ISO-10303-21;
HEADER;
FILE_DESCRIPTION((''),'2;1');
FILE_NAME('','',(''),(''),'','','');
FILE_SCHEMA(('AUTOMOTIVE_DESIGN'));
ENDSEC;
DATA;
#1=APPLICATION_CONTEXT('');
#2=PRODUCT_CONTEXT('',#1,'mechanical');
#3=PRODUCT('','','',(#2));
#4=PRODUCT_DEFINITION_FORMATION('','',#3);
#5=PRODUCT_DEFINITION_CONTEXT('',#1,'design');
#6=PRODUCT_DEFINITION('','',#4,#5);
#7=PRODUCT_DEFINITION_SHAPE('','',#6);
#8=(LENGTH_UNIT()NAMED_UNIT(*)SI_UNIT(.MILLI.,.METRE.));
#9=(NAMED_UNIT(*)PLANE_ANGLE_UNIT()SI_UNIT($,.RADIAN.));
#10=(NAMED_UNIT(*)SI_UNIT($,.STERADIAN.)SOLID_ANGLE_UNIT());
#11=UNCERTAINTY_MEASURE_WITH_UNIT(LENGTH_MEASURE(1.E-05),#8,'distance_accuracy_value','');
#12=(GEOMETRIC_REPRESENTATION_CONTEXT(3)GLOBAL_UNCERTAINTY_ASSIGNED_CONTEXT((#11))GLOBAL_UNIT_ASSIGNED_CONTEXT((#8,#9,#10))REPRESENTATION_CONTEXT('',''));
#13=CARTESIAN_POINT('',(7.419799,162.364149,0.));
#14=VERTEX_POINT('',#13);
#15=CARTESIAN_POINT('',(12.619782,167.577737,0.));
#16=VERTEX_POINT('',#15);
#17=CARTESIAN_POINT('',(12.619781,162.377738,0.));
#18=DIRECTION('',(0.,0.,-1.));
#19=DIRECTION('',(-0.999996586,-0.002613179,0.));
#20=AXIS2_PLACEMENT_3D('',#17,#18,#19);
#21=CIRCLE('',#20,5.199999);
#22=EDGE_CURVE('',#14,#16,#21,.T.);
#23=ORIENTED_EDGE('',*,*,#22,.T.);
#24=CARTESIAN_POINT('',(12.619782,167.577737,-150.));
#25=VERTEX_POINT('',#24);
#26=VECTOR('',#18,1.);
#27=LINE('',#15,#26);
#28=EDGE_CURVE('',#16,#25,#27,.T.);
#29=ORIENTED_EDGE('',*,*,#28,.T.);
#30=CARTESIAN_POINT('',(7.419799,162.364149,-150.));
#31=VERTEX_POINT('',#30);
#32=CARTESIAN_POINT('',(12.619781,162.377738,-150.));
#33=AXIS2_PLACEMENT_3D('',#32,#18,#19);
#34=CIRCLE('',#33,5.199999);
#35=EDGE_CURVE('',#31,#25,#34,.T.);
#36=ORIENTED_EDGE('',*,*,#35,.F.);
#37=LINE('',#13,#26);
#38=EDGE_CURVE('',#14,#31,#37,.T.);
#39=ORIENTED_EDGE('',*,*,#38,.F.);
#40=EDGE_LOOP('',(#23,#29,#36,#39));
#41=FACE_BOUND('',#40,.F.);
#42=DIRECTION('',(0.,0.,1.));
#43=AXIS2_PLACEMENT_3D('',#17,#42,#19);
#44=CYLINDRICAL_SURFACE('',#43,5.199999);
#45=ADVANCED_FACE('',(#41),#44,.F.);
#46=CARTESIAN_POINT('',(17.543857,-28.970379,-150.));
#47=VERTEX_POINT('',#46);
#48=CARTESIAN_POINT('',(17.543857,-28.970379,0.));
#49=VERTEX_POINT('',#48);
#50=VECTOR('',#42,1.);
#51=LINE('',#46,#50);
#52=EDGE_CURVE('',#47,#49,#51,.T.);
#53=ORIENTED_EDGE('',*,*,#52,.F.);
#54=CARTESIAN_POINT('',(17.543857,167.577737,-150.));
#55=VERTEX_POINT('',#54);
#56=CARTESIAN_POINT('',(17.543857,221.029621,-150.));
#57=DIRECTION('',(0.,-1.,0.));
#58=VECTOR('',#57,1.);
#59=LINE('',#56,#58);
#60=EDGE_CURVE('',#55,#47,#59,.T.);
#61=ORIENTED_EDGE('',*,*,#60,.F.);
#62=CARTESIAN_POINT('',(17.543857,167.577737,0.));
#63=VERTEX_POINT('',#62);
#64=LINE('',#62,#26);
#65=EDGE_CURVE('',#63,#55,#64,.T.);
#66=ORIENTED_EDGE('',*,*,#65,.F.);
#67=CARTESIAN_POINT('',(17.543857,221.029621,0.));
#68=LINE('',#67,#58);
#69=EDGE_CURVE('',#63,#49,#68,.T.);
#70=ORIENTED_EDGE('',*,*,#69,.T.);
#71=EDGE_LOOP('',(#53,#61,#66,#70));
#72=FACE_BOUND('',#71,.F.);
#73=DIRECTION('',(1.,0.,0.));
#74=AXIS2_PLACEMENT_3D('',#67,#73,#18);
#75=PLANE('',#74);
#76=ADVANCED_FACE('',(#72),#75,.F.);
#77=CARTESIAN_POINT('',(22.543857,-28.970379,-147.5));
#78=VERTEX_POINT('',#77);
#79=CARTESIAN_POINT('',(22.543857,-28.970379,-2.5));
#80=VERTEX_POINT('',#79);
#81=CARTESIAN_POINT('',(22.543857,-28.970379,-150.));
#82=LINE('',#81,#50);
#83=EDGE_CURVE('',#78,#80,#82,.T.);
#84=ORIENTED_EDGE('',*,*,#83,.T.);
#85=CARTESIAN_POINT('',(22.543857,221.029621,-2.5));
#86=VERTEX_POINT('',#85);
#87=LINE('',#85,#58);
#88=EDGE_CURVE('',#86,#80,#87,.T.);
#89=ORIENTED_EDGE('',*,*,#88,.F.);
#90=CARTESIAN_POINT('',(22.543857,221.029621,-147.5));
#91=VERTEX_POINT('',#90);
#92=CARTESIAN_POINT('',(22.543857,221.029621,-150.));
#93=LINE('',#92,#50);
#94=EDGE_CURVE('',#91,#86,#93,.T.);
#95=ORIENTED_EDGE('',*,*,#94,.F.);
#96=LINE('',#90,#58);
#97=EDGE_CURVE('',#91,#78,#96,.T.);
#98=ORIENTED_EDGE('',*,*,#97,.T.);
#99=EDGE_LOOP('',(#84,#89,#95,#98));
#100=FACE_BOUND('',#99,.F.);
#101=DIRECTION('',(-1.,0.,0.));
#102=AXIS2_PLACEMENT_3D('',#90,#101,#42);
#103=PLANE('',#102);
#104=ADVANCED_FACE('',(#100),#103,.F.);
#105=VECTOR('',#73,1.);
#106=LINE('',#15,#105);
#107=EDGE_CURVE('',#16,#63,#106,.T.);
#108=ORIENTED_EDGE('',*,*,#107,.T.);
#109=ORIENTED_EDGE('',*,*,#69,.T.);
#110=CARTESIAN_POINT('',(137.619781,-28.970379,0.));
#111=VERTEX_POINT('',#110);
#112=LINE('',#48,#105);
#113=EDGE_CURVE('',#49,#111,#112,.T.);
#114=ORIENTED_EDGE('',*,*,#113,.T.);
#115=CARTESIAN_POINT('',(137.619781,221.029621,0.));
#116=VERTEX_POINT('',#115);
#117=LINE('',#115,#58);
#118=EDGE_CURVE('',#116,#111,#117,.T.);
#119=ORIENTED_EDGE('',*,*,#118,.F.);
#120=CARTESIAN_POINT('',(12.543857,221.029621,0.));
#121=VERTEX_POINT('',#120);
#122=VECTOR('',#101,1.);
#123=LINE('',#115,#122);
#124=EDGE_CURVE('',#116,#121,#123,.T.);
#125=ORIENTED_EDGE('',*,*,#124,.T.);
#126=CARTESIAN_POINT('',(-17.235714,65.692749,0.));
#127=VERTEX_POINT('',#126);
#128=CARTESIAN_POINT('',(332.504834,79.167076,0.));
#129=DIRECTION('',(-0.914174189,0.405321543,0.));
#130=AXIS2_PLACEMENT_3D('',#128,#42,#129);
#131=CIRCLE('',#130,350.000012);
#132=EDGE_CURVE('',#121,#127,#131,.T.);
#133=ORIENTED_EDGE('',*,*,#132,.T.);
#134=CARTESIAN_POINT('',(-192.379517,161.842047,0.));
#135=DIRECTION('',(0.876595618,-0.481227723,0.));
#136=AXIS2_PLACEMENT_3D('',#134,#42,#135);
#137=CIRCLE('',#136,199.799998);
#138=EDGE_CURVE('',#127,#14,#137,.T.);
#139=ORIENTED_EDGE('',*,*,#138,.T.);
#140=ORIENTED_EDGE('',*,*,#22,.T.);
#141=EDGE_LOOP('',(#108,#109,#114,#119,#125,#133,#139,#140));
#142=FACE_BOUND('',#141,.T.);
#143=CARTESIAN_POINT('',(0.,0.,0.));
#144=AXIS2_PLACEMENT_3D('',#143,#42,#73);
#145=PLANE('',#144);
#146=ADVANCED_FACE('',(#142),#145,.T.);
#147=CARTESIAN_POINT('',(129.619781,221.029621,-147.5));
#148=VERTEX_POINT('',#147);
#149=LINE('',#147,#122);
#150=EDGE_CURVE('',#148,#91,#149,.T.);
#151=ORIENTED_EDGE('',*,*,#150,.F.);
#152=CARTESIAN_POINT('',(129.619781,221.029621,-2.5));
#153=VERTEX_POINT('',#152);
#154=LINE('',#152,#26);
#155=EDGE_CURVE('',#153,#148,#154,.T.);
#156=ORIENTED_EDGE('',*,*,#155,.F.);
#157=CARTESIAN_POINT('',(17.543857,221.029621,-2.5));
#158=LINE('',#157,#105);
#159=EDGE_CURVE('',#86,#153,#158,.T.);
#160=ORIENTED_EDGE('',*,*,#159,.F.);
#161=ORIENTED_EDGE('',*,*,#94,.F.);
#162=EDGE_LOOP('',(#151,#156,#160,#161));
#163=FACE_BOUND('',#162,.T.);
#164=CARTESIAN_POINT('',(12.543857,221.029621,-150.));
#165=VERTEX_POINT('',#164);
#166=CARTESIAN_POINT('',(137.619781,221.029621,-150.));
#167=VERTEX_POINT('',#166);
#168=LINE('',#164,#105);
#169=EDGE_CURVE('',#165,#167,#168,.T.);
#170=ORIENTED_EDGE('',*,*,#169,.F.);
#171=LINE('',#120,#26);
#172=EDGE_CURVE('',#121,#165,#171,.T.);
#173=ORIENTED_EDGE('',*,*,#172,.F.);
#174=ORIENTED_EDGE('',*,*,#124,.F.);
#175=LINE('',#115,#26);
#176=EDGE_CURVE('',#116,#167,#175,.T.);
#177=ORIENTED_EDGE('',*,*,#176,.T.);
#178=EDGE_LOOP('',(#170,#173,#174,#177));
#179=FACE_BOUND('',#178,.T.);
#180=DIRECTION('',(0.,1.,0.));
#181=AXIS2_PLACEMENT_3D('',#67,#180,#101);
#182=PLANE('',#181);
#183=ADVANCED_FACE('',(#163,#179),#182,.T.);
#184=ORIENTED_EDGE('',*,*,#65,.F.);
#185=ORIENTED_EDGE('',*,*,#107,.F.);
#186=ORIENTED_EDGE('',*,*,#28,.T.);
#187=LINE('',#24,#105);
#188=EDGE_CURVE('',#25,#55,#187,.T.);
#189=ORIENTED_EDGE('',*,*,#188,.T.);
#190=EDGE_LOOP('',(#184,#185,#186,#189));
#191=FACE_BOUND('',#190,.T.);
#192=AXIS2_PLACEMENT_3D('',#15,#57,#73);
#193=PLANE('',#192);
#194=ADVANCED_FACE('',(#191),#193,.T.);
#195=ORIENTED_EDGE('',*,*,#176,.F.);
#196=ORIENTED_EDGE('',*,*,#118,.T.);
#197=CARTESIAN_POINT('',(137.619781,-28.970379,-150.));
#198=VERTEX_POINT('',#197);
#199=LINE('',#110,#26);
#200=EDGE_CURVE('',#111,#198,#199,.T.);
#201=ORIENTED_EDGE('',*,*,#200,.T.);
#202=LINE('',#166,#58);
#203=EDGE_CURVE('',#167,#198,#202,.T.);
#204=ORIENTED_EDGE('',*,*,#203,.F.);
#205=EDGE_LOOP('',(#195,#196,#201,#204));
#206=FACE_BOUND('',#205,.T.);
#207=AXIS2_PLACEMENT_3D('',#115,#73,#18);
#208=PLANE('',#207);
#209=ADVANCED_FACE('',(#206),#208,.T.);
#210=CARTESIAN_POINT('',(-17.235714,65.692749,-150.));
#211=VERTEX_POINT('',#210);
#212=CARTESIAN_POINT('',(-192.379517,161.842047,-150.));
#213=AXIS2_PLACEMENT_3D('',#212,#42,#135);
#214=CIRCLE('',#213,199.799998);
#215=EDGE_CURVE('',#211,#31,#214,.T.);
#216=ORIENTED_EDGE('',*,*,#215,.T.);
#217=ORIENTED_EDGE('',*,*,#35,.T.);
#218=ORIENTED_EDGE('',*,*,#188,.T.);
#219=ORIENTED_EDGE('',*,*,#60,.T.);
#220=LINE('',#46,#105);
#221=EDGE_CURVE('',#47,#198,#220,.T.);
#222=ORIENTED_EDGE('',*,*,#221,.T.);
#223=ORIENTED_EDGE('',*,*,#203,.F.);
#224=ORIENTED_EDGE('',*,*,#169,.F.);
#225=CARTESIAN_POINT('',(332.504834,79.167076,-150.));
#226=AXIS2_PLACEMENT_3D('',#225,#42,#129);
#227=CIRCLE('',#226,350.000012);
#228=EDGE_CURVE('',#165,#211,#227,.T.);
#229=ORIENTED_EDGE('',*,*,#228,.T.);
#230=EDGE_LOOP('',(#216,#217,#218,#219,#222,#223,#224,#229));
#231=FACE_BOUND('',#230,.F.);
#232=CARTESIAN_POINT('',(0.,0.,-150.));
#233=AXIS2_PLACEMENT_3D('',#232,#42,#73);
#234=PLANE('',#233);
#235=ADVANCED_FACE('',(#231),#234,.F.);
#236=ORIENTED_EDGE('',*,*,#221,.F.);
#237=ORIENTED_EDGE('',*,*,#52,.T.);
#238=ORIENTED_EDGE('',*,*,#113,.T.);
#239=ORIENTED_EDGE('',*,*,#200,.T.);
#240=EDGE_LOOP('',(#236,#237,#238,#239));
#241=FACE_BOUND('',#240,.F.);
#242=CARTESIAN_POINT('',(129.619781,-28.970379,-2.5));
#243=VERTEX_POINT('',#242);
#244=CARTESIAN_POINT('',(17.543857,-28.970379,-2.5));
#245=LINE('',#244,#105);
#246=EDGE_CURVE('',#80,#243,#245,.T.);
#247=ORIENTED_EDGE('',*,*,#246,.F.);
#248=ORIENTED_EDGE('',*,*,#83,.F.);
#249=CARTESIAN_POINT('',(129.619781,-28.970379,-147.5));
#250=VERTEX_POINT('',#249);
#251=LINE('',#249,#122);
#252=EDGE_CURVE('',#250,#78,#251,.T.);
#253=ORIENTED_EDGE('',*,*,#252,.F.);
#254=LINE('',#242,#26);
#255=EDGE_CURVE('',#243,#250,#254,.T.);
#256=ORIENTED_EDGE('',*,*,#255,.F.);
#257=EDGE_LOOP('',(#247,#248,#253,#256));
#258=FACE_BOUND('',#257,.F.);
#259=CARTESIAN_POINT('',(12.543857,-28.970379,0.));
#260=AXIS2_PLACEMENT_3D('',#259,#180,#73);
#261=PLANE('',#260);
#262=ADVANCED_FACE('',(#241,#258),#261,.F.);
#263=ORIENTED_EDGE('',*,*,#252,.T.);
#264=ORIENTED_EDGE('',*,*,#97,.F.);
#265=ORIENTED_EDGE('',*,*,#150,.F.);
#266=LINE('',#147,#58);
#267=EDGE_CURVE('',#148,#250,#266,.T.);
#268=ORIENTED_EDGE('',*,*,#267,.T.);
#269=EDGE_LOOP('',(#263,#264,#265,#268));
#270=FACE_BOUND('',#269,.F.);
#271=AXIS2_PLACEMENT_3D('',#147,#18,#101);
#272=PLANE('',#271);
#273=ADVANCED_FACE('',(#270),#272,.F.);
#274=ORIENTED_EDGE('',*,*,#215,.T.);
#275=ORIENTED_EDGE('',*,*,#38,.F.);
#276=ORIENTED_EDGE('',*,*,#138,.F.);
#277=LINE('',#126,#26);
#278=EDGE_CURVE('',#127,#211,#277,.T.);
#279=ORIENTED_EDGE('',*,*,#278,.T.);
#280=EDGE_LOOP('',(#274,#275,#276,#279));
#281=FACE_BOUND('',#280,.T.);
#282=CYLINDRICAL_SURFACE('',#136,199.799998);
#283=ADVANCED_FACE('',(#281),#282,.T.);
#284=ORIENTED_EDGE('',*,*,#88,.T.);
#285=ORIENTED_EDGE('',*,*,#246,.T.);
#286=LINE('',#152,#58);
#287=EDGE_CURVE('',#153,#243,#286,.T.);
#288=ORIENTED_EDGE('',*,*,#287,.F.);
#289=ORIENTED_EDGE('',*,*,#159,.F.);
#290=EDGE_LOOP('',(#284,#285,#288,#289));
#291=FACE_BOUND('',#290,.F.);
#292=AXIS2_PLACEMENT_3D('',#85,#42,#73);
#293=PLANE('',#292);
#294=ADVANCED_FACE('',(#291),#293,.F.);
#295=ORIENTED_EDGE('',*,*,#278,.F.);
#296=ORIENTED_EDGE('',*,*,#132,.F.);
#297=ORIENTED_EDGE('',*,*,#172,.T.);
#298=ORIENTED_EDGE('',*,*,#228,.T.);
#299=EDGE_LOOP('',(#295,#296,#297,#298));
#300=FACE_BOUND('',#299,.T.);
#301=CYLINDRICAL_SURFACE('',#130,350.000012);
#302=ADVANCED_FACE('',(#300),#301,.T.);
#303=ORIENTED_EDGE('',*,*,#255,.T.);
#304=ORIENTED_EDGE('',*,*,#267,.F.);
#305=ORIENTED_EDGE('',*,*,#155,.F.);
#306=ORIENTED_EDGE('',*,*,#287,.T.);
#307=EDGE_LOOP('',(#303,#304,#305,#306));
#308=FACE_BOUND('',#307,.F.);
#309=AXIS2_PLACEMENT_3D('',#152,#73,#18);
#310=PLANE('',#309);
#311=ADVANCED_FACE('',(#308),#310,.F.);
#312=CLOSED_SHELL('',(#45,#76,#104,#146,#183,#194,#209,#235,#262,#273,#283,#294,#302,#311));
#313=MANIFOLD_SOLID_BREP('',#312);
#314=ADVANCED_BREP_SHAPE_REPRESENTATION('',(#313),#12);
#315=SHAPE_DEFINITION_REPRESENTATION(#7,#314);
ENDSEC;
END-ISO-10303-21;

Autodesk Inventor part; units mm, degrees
ref_plane "YZ Plane" through (0, 0, 0) normal (1, 0, 0) x (0, 1, 0)
ref_plane "XZ Plane" through (0, 0, 0) normal (0, 1, 0) x (-1, 0, 0)
ref_plane "XY Plane" through (0, 0, 0) normal (0, 0, 1) x (1, 0, 0)
ref_plane "Work Plane1" through (0, 0, 0) normal (0, 0, 1) x (1, 0, 0)
sketch "Sketch1" plane through (0, 0, 0) normal (0, 0, 1) x (1, 0, 0)
  line L0 (17.543857, 167.377737) -> (17.543857, -167.217661)
  line L1 (12.619782, 167.377737) -> (17.543857, 167.377737)
  arc A0 (12.619782, 167.377737) -> (7.619799, 162.364672) centre (12.619782, 162.377737) ccw
  arc A1 (-17.220572, 65.305302) -> (7.619799, 162.364672) centre (-192.379519, 161.842048) ccw
  spline S0 degree 3 poles (15.506608, -167.377737) (14.147951, -162.345779) (13.145398, -158.732995) (12.220923, -155.352167) (11.293739, -151.961434) (10.445107, -148.803984) (9.518675, -145.1939) (8.592185, -141.583591) (7.587911, -137.520736) (6.471828, -132.825116) (5.346807, -128.091892) (4.10798, -122.714929) (2.846807, -117.031098) (1.553707, -111.203383) (0.259478, -105.140337) (-0.92675, -99.276727) (-2.132162, -93.318284) (-3.225902, -87.566367) (-4.23784, -81.945311) (-5.5682, -74.555504) (-6.790359, -67.285613) (-7.971575, -59.836625) (-9.552302, -49.86823) (-11.026112, -39.596979) (-12.264211, -29.351416) (-13.140881, -22.09676) (-13.908596, -14.883997) (-14.596958, -7.852484) (-15.268141, -0.996451) (-15.867695, 5.674384) (-16.352254, 12.543674) (-16.713746, 17.668333) (-17.004603, 22.971721) (-17.201941, 28.510361) (-17.39909, 34.043661) (-17.502934, 39.811858) (-17.52457, 45.347495) (-17.543857, 50.282258) (-17.501315, 54.954248) (-17.410102, 59.083092) (-17.361094, 61.301547) (-17.298032, 63.363057) (-17.220572, 65.305302) knots 0 0 0 0 0.06599902 0.06599902 0.06599902 0.13219142 0.13219142 0.13219142 0.19838797 0.19838797 0.19838797 0.26511464 0.26511464 0.26511464 0.33353047 0.33353047 0.33353047 0.40305279 0.40305279 0.40305279 0.49445138 0.49445138 0.49445138 0.61676292 0.61676292 0.61676292 0.70336901 0.70336901 0.70336901 0.78781372 0.78781372 0.78781372 0.85081155 0.85081155 0.85081155 0.91374865 0.91374865 0.91374865 0.96985415 0.96985415 0.96985415 1 1 1 1
  line L2 (16.076195, -167.223946) -> (15.506608, -167.377737)
  line L3 (17.264865, -167.218855) -> (16.076195, -167.223946)
  line L4 (17.26486, -167.217661) -> (17.264865, -167.218855)
  line L5 (17.543857, -167.217661) -> (17.26486, -167.217661)
  line L6 (-7.380943, 65.327391) -> (-7.294185, 45.068724)
  line L7 (12.904649, 65.39642) -> (-7.380943, 65.327391)
  line L8 (12.973526, 45.15552) -> (12.904649, 65.39642)
  line L9 (-7.294185, 45.068724) -> (12.973526, 45.15552)
  arc A2 (12.543857, 221.029621) -> (-17.220572, 65.305302) centre (332.504822, 79.16708) ccw
  line L10 (12.543857, 221.029621) -> (17.543857, 221.029621)
  line L11 (17.543857, 221.029621) -> (17.543857, 167.377737)
  line L12 (17.543857, 167.377737) -> (12.619782, 167.377737)
  arc A3 (12.619782, 167.577737) -> (7.419799, 162.364149) centre (12.619782, 162.377737) ccw
  line L13 (12.619782, 167.577737) -> (17.743857, 167.577737)
  line L14 (17.743857, 167.577737) -> (17.743857, -167.417661)
  line L15 (17.743857, -167.417661) -> (17.544285, -167.417661)
  line L16 (17.544285, -167.417661) -> (16.103141, -167.423832)
  line L17 (16.103141, -167.423832) -> (15.365657, -167.622957)
  arc A4 (-17.41853, 65.360482) -> (7.419799, 162.364149) centre (-192.379519, 161.842048) ccw
  point P0 (0, 0)
  point P1 (-17.235714, 65.692749)
  point P2 (17.543857, 167.577737)
  dimension "d0" = 5
  dimension "d10" = 350
  dimension "d11" = 0.2
sketch "Sketch1 outline for Extrusion1" plane through (0, 0, 0) normal (0, 0, 1) x (1, 0, 0)
  line L0 (17.543857, 221.029621) -> (12.543857, 221.029621)
  line L1 (17.543857, 167.577737) -> (17.543857, 221.029621)
  line L2 (12.619782, 167.577737) -> (17.543857, 167.577737)
  arc A0 (7.419799, 162.364149) -> (12.619782, 167.577737) centre (12.619782, 162.377737) cw
  arc A1 (-17.235714, 65.692749) -> (7.419799, 162.364149) centre (-192.379519, 161.842048) ccw
  arc A2 (12.543857, 221.029621) -> (-17.235714, 65.692749) centre (332.504822, 79.16708) ccw
extrude "Extrusion1" add sketch "Sketch1 outline for Extrusion1" against normal blind 150
sketch "Sketch2" plane through (12.543857, 221.029621, 0) normal (0, 1, 0) x (1, 0, 0)
  line L0 (0.075924, 0) -> (-4.924076, 0)
  line L1 (0.075924, 0) -> (125.075924, 0)
  line L2 (125.075924, 0) -> (125.075924, 150)
  line L3 (125.075924, 150) -> (0.075924, 150)
  line L4 (0.075924, 150) -> (0.075924, 0)
  line L5 (5, 0) -> (5, 150)
  line L6 (5, 2.5) -> (117.075924, 2.5)
  line L7 (117.075924, 2.5) -> (117.075924, 147.5)
  line L8 (117.075924, 147.5) -> (5, 147.5)
  line L9 (5, 147.5) -> (5, 2.5)
  line L10 (5, 150) -> (10, 150)
  line L11 (10, 150) -> (10, 0)
  line L12 (10, 0) -> (5, 0)
  line L13 (5, 0) -> (5, 150)
  point P0 (-12.543857, 0)
  point P1 (-4.924059, 0)
  point P2 (5, 147.5)
  point P3 (10, 2.5)
  point P4 (10, 147.5)
  dimension "d3" = 125
  dimension "d4" = 2.5
  dimension "d5" = 2.5
  dimension "d6" = 8
  dimension "d9" = 5
extrude "Extrusion2" add sketch "Sketch2" against normal blind 250 contours L5 L6 L11 L1 | L11 L6 L7 L8 L3 L2 L1 | L5 L8 L11 L6 | L3 L11 L8 L5
properties part number "WingBox" material "Plastic, Opaque White"
